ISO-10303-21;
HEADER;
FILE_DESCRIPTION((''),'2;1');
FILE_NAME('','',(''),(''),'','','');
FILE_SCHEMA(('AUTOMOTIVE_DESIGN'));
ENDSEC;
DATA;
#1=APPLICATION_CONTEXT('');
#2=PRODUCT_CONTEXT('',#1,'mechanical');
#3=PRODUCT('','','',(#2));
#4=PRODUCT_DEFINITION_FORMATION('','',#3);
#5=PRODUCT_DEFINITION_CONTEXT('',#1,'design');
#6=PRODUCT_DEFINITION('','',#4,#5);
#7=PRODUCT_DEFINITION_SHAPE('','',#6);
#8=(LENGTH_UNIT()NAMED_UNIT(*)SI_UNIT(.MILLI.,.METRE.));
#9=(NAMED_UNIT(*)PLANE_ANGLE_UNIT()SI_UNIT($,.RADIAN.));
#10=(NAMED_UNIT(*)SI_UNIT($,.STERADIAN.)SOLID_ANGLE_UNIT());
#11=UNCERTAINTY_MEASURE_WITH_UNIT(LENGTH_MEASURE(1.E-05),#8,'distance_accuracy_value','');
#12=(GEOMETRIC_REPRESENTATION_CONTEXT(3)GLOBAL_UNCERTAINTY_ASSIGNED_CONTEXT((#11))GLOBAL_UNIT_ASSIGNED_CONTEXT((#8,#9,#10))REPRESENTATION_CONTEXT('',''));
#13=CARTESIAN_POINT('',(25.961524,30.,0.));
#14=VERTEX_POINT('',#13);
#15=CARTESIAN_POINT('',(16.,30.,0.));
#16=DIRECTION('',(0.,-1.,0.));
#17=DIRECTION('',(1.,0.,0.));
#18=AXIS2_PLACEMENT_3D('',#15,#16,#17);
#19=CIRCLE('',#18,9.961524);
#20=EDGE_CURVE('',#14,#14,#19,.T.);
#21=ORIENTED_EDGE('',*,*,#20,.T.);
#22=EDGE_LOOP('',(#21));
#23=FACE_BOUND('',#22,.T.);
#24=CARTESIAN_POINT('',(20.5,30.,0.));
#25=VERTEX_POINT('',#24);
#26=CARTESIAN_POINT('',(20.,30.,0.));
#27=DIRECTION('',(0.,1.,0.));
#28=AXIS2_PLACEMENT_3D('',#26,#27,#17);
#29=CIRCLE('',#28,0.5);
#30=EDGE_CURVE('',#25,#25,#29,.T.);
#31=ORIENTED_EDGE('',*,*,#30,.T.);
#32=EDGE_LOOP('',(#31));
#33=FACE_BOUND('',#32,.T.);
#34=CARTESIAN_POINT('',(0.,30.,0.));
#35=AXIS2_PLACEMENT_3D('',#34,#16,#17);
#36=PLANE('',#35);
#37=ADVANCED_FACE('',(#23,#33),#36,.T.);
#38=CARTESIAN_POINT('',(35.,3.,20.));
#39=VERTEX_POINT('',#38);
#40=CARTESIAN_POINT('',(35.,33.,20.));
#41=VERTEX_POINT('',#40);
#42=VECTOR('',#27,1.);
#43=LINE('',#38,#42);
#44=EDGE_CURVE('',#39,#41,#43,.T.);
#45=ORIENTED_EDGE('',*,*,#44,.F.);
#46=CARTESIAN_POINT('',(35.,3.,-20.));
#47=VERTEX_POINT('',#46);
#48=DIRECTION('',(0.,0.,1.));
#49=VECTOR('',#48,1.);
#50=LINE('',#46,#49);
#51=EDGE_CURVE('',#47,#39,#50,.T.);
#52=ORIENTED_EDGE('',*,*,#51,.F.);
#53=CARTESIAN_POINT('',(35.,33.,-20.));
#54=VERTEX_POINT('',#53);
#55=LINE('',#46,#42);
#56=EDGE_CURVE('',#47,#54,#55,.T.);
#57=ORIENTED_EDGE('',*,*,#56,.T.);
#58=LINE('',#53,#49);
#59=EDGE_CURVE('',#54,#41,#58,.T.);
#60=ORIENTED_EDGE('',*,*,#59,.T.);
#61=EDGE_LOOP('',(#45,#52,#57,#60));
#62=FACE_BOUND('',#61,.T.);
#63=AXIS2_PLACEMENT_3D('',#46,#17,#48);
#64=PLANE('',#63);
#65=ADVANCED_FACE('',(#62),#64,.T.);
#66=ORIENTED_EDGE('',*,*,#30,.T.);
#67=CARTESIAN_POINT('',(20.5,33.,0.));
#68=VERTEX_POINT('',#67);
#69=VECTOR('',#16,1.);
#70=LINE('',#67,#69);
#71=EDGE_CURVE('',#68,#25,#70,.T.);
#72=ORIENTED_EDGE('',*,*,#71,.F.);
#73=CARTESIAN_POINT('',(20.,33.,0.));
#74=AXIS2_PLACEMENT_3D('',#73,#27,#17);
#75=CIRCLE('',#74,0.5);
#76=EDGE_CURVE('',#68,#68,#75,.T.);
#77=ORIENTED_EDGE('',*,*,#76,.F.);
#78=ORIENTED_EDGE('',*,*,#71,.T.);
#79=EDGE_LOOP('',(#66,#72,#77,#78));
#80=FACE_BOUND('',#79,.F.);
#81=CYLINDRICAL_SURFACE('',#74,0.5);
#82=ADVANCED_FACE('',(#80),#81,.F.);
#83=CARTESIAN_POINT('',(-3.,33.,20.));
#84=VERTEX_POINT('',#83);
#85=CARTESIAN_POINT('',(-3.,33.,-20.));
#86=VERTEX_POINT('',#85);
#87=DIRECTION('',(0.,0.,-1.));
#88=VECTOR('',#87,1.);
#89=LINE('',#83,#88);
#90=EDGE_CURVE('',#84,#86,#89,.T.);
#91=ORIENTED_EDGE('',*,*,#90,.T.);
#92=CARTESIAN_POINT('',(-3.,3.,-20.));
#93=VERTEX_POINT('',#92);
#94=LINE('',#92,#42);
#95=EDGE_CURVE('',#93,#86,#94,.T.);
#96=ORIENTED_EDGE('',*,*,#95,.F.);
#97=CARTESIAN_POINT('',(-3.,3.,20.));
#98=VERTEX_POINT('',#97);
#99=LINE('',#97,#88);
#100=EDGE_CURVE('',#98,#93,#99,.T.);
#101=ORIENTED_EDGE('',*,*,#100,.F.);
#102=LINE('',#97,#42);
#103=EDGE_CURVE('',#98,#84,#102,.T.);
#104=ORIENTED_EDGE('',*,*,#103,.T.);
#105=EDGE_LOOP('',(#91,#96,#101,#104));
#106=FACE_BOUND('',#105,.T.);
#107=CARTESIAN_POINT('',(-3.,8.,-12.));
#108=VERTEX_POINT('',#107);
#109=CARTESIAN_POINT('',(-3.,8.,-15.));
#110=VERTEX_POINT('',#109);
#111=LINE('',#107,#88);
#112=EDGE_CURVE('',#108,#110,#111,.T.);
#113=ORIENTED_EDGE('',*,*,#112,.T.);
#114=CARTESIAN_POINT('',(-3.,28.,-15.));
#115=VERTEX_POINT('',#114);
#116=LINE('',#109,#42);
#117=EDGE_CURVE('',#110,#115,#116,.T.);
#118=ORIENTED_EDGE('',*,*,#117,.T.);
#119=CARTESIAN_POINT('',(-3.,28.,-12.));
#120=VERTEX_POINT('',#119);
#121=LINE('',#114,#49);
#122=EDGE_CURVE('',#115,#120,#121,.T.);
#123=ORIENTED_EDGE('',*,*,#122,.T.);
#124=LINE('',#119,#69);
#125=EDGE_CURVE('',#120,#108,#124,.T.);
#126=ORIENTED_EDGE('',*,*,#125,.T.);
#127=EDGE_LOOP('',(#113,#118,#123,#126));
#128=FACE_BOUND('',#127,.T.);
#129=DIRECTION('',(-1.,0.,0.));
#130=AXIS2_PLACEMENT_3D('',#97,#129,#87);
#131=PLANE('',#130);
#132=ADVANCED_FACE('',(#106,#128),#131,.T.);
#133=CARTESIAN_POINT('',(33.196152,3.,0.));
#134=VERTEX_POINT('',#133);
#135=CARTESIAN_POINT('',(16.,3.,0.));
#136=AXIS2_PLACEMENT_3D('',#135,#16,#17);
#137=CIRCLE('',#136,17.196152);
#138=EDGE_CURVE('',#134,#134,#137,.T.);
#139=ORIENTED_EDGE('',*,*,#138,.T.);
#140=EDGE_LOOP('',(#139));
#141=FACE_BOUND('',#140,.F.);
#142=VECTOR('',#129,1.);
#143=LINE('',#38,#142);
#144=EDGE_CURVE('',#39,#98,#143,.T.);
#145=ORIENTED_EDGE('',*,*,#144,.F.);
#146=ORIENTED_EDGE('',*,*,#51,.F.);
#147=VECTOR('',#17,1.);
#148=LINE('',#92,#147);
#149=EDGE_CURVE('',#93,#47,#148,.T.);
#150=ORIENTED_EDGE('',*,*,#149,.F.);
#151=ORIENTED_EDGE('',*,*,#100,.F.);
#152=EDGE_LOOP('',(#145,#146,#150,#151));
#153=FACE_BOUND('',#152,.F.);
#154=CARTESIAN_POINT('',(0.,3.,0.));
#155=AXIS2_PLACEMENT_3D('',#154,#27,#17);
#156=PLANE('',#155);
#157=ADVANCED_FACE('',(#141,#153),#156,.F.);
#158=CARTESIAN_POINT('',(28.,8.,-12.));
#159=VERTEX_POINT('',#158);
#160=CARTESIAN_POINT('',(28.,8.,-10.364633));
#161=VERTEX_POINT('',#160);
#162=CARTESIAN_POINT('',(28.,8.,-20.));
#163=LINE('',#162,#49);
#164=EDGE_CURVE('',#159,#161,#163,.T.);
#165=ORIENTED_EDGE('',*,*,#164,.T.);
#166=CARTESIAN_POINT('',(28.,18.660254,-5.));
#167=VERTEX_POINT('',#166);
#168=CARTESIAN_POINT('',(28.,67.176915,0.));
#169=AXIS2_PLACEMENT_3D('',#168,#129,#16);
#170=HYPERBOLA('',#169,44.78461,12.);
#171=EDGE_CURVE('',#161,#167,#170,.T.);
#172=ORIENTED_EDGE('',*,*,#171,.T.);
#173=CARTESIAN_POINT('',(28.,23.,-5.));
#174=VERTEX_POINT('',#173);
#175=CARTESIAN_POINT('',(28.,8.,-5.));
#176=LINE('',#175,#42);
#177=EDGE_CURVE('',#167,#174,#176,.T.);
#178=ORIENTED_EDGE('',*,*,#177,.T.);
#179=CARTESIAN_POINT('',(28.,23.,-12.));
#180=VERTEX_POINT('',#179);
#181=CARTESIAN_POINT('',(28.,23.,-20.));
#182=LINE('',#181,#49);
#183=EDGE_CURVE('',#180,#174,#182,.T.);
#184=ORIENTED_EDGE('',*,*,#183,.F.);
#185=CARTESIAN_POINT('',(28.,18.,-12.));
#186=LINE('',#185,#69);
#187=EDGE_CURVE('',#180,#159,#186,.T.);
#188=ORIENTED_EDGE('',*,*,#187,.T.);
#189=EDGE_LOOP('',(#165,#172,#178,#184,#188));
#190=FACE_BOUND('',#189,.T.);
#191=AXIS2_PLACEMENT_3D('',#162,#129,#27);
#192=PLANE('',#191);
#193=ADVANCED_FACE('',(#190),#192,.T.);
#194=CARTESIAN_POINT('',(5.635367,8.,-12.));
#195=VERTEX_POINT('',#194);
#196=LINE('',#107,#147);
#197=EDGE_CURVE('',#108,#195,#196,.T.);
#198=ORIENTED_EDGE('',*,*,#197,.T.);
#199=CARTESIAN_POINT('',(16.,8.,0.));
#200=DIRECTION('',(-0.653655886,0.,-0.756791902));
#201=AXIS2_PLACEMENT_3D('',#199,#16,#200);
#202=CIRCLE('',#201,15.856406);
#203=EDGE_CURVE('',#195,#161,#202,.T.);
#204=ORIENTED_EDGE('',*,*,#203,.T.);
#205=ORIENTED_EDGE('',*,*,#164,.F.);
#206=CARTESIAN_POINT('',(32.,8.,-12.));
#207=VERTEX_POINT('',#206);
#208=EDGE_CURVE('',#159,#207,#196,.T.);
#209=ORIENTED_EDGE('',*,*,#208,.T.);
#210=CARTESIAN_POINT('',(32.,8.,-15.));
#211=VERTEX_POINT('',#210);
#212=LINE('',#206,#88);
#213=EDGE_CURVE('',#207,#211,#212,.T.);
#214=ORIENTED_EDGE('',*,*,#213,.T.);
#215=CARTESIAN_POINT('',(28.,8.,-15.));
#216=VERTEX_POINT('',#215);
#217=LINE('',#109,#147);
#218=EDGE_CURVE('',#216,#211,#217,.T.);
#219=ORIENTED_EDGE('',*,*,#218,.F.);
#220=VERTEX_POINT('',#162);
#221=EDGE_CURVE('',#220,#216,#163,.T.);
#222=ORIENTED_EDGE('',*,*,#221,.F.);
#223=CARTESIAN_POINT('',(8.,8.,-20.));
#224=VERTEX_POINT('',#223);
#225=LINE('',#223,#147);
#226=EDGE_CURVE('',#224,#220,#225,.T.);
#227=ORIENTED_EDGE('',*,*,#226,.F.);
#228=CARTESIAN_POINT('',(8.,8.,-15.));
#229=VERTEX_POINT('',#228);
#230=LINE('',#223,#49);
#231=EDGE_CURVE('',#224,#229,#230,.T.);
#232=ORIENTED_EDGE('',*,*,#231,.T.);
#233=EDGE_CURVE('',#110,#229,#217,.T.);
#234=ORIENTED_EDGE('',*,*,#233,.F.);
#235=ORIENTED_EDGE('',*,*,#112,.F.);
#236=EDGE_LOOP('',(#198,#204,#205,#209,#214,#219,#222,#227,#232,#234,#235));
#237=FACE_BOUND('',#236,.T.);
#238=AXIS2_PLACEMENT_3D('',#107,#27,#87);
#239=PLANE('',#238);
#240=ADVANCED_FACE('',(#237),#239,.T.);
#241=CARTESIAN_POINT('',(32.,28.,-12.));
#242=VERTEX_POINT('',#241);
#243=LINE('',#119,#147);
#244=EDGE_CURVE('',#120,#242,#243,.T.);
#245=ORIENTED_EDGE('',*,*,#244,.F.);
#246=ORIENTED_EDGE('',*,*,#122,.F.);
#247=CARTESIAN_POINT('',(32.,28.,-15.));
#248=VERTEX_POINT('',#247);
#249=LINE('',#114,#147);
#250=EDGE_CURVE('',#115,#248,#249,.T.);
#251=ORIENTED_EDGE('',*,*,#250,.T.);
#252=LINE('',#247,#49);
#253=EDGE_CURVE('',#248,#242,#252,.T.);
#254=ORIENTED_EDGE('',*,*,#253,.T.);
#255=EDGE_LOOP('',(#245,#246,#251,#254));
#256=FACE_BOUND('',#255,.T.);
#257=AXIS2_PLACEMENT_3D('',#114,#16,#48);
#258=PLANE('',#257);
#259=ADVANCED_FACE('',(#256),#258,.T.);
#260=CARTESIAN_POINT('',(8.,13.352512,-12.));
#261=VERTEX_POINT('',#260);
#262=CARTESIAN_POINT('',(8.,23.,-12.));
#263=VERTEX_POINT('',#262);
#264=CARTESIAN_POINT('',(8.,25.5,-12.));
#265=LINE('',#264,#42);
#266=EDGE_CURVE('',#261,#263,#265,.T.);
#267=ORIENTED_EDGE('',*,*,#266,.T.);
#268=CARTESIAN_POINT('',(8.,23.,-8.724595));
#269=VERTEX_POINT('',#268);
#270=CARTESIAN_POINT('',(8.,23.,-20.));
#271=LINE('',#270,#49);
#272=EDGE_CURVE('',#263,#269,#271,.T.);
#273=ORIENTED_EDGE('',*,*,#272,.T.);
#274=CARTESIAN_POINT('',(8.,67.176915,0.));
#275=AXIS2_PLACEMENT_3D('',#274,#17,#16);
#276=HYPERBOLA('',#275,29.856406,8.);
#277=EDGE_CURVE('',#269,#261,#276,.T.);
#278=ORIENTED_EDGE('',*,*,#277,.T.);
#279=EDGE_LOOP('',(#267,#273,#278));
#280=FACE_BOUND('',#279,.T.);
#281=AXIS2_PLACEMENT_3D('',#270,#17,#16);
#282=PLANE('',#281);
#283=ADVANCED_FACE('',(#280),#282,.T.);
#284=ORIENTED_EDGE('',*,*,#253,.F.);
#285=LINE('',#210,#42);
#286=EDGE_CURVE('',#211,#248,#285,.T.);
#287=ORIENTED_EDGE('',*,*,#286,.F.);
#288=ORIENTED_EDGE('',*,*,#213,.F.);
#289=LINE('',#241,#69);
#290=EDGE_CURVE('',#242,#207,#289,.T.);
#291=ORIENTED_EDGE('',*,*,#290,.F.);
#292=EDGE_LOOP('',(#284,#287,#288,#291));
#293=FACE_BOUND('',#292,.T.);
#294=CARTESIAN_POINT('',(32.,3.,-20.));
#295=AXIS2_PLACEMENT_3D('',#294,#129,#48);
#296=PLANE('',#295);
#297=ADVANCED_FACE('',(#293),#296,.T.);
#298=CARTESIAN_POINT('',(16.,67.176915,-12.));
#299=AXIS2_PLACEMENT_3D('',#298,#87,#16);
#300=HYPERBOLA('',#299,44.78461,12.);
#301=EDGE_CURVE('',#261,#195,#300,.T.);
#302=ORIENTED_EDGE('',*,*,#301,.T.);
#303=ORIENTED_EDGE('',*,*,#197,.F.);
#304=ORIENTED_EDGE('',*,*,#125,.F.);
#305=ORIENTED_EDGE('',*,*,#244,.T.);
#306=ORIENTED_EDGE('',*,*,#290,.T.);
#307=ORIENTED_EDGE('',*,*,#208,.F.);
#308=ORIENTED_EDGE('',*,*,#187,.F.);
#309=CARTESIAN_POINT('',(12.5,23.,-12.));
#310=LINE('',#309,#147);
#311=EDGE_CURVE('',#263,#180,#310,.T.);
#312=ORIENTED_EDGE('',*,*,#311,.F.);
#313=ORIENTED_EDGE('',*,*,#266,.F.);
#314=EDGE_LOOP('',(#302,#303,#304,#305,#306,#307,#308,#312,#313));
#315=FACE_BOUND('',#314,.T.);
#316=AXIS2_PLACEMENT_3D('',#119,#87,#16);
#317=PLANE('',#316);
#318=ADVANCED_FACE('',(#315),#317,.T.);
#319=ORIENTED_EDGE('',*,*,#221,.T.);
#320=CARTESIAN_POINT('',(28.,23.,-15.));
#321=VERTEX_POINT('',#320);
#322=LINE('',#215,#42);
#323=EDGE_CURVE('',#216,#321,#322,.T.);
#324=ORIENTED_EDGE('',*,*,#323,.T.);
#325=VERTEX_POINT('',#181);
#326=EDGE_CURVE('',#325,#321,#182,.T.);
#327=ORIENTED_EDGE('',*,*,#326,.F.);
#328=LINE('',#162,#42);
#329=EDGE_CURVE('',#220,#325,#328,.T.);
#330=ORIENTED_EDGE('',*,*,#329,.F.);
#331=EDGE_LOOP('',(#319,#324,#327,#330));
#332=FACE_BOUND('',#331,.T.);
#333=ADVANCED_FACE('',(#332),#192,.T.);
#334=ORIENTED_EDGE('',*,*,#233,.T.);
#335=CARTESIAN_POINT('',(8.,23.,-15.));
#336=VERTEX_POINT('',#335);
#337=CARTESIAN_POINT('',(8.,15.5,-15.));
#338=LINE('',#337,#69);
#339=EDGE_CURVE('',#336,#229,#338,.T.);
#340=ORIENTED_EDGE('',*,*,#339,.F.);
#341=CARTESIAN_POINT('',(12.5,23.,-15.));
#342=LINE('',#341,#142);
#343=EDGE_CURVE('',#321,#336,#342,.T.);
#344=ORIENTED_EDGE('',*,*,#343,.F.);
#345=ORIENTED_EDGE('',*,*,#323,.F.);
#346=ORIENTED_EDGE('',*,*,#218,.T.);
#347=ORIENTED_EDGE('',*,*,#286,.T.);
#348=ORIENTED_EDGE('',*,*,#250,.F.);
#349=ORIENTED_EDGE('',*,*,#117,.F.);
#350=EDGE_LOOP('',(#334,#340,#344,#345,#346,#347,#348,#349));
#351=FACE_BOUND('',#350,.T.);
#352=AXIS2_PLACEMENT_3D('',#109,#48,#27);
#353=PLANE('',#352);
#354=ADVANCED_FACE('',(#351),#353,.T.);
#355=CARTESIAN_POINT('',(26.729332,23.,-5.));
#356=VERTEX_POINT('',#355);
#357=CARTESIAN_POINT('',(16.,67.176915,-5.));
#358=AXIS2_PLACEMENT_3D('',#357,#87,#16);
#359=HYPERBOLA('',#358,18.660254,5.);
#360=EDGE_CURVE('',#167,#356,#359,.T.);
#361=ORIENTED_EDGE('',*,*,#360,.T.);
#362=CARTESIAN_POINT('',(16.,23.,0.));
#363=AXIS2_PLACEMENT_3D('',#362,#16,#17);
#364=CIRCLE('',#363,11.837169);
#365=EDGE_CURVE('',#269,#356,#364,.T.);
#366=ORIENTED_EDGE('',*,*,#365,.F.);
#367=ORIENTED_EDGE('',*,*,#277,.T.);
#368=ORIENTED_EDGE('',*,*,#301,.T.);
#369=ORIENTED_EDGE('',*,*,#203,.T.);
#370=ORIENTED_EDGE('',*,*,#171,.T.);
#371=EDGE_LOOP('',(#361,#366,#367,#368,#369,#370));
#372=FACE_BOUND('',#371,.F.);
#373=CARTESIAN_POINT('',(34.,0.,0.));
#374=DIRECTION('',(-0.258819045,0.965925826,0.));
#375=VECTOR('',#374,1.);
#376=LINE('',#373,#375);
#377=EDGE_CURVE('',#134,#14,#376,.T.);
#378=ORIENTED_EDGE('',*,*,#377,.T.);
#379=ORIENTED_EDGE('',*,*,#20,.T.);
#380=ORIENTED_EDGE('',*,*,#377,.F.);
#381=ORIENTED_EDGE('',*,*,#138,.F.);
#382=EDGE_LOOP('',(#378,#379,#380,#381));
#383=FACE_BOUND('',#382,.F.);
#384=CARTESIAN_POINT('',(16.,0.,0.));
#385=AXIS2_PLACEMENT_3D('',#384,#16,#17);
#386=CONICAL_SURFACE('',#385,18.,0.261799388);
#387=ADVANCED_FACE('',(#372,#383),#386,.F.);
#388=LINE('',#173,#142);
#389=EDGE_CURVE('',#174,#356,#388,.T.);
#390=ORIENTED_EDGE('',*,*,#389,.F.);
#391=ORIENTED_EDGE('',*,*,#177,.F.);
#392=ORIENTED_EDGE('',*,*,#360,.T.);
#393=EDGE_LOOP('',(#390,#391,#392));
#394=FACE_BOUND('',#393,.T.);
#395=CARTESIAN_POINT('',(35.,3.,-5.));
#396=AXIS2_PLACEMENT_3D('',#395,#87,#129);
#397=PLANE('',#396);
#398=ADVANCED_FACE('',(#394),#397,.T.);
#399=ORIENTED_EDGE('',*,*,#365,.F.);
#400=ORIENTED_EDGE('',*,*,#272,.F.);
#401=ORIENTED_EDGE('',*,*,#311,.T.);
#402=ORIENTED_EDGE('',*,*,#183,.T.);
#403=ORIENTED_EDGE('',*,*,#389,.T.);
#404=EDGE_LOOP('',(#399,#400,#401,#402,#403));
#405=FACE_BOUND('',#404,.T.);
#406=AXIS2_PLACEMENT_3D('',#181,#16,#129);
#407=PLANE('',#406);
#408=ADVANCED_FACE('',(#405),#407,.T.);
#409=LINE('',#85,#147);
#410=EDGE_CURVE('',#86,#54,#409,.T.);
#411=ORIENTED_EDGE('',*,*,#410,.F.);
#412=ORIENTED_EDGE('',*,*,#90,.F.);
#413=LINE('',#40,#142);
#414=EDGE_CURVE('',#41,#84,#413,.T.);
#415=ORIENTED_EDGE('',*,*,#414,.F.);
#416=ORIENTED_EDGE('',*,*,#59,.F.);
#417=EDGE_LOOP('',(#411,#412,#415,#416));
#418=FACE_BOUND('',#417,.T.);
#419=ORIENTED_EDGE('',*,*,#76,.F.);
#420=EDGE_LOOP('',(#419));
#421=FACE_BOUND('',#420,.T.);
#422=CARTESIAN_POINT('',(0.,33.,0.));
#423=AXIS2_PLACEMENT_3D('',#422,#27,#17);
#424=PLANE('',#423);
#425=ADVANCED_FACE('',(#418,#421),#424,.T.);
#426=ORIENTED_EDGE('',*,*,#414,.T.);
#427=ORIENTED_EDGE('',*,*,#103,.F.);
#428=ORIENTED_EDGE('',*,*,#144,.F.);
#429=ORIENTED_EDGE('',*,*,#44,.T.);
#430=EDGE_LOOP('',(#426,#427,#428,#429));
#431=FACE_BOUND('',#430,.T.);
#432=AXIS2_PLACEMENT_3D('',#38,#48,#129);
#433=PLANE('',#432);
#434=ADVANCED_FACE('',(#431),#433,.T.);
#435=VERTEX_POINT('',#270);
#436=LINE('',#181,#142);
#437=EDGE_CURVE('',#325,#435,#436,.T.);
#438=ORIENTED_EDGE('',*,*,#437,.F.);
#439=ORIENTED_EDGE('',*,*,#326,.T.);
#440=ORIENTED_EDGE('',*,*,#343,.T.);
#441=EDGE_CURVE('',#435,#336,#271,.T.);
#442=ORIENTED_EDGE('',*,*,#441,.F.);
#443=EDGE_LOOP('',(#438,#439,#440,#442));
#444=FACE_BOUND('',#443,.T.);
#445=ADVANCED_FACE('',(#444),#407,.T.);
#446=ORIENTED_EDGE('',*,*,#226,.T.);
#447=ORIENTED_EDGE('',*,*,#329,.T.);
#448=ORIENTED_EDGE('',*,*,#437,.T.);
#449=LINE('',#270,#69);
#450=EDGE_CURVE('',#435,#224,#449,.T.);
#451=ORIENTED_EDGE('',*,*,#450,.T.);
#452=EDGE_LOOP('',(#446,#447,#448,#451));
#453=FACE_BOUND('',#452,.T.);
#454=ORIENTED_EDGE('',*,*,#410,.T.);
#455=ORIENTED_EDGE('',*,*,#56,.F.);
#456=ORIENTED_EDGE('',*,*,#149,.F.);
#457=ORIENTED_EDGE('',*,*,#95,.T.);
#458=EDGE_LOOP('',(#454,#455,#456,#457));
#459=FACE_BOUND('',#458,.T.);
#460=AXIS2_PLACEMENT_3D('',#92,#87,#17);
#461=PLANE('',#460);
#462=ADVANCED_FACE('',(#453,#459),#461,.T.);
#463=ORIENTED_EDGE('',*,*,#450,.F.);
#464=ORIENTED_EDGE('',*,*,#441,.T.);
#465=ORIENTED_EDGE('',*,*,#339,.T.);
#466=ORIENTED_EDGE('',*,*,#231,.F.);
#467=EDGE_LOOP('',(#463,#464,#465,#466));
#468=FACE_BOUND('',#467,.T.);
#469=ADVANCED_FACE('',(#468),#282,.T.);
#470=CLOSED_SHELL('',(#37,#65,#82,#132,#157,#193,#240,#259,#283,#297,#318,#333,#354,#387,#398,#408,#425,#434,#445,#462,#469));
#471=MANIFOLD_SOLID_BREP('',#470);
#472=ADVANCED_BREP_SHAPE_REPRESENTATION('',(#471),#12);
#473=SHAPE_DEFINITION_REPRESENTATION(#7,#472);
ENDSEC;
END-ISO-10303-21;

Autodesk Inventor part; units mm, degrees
ref_plane "YZ Plane" through (0, 0, 0) normal (1, 0, 0) x (0, 1, 0)
ref_plane "XZ Plane" through (0, 0, 0) normal (0, 1, 0) x (-1, 0, 0)
ref_plane "XY Plane" through (0, 0, 0) normal (0, 0, 1) x (1, 0, 0)
ref_plane "Work Plane13" through (0, 3, 0) normal (0, 1, 0) x (1, 0, 0)
sketch "Sketch45" plane through (0, 3, 0) normal (0, 1, 0) x (1, 0, 0)
  line L0 (35, -20) -> (-3, -20)
  line L1 (-3, -20) -> (-3, 20)
  line L2 (-3, 20) -> (35, 20)
  line L3 (35, 20) -> (35, -20)
  point P0 (0, 0)
  dimension "d142" = 38
  dimension "d143" = 40
extrude "Extrusion34" add sketch "Sketch45" along normal blind 30
sketch "Sketch46" plane through (0, 33, 0) normal (0, 1, 0) x (1, 0, 0)
  point P0 (0, 0)
ref_plane "Work Plane11" through (0, 0, 0) normal (0, -1, 0) x (1, 0, 0)
sketch "Sketch47" plane through (0, 0, 0) normal (0, -1, 0) x (1, 0, 0)
  circle A0 centre (16, 0) radius 18
  point P0 (0, 0)
  dimension "d146" = 36
extrude "Extrusion35" cut sketch "Sketch47" against normal blind 30 draft -15
sketch "Sketch48" plane through (0, 33, 0) normal (0, 1, 0) x (1, 0, 0)
  point P0 (0, 0)
sketch "Sketch49" plane through (0, 33, 0) normal (0, 1, 0) x (1, 0, 0)
  circle A0 centre (20, 0) radius 0.5
  point P0 (0, 0)
  dimension "d149" = 1
extrude "Extrusion36" cut sketch "Sketch49" against normal through all
ref_plane "Work Plane7" through (35, 3, -20) normal (0, 0, -1) x (-1, 0, 0)
sketch "Sketch58" plane through (35, 3, -20) normal (0, 0, -1) x (-1, 0, 0)
  line L0 (7, 20) -> (27, 20)
  line L1 (27, 20) -> (27, 5)
  line L2 (27, 5) -> (7, 5)
  line L3 (7, 5) -> (7, 20)
  point P0 (35, -3)
  dimension "d156" = 20
  dimension "d157" = 15
extrude "Extrusion38" cut sketch "Sketch58" against normal blind 15
ref_plane "Work Plane4" through (-3, 3, -20) normal (-1, 0, 0) x (0, 0, 1)
sketch "Sketch59" plane through (-3, 3, -20) normal (-1, 0, 0) x (0, 0, 1)
  line L0 (5, 25) -> (8, 25)
  line L1 (8, 25) -> (8, 5)
  line L2 (8, 5) -> (5, 5)
  line L3 (5, 5) -> (5, 25)
  point P0 (20, -3)
  dimension "d160" = 3
  dimension "d161" = 20
extrude "Extrusion39" cut sketch "Sketch59" against normal blind 35
ref_plane "Work Plane1" through (0, 3, 0) normal (0, 1, 0) x (1, 0, 0)
ref_plane "Work Plane6" through (0, 23, 0) normal (0, 1, 0) x (1, 0, 0)
properties part number "liquid port_v00"
